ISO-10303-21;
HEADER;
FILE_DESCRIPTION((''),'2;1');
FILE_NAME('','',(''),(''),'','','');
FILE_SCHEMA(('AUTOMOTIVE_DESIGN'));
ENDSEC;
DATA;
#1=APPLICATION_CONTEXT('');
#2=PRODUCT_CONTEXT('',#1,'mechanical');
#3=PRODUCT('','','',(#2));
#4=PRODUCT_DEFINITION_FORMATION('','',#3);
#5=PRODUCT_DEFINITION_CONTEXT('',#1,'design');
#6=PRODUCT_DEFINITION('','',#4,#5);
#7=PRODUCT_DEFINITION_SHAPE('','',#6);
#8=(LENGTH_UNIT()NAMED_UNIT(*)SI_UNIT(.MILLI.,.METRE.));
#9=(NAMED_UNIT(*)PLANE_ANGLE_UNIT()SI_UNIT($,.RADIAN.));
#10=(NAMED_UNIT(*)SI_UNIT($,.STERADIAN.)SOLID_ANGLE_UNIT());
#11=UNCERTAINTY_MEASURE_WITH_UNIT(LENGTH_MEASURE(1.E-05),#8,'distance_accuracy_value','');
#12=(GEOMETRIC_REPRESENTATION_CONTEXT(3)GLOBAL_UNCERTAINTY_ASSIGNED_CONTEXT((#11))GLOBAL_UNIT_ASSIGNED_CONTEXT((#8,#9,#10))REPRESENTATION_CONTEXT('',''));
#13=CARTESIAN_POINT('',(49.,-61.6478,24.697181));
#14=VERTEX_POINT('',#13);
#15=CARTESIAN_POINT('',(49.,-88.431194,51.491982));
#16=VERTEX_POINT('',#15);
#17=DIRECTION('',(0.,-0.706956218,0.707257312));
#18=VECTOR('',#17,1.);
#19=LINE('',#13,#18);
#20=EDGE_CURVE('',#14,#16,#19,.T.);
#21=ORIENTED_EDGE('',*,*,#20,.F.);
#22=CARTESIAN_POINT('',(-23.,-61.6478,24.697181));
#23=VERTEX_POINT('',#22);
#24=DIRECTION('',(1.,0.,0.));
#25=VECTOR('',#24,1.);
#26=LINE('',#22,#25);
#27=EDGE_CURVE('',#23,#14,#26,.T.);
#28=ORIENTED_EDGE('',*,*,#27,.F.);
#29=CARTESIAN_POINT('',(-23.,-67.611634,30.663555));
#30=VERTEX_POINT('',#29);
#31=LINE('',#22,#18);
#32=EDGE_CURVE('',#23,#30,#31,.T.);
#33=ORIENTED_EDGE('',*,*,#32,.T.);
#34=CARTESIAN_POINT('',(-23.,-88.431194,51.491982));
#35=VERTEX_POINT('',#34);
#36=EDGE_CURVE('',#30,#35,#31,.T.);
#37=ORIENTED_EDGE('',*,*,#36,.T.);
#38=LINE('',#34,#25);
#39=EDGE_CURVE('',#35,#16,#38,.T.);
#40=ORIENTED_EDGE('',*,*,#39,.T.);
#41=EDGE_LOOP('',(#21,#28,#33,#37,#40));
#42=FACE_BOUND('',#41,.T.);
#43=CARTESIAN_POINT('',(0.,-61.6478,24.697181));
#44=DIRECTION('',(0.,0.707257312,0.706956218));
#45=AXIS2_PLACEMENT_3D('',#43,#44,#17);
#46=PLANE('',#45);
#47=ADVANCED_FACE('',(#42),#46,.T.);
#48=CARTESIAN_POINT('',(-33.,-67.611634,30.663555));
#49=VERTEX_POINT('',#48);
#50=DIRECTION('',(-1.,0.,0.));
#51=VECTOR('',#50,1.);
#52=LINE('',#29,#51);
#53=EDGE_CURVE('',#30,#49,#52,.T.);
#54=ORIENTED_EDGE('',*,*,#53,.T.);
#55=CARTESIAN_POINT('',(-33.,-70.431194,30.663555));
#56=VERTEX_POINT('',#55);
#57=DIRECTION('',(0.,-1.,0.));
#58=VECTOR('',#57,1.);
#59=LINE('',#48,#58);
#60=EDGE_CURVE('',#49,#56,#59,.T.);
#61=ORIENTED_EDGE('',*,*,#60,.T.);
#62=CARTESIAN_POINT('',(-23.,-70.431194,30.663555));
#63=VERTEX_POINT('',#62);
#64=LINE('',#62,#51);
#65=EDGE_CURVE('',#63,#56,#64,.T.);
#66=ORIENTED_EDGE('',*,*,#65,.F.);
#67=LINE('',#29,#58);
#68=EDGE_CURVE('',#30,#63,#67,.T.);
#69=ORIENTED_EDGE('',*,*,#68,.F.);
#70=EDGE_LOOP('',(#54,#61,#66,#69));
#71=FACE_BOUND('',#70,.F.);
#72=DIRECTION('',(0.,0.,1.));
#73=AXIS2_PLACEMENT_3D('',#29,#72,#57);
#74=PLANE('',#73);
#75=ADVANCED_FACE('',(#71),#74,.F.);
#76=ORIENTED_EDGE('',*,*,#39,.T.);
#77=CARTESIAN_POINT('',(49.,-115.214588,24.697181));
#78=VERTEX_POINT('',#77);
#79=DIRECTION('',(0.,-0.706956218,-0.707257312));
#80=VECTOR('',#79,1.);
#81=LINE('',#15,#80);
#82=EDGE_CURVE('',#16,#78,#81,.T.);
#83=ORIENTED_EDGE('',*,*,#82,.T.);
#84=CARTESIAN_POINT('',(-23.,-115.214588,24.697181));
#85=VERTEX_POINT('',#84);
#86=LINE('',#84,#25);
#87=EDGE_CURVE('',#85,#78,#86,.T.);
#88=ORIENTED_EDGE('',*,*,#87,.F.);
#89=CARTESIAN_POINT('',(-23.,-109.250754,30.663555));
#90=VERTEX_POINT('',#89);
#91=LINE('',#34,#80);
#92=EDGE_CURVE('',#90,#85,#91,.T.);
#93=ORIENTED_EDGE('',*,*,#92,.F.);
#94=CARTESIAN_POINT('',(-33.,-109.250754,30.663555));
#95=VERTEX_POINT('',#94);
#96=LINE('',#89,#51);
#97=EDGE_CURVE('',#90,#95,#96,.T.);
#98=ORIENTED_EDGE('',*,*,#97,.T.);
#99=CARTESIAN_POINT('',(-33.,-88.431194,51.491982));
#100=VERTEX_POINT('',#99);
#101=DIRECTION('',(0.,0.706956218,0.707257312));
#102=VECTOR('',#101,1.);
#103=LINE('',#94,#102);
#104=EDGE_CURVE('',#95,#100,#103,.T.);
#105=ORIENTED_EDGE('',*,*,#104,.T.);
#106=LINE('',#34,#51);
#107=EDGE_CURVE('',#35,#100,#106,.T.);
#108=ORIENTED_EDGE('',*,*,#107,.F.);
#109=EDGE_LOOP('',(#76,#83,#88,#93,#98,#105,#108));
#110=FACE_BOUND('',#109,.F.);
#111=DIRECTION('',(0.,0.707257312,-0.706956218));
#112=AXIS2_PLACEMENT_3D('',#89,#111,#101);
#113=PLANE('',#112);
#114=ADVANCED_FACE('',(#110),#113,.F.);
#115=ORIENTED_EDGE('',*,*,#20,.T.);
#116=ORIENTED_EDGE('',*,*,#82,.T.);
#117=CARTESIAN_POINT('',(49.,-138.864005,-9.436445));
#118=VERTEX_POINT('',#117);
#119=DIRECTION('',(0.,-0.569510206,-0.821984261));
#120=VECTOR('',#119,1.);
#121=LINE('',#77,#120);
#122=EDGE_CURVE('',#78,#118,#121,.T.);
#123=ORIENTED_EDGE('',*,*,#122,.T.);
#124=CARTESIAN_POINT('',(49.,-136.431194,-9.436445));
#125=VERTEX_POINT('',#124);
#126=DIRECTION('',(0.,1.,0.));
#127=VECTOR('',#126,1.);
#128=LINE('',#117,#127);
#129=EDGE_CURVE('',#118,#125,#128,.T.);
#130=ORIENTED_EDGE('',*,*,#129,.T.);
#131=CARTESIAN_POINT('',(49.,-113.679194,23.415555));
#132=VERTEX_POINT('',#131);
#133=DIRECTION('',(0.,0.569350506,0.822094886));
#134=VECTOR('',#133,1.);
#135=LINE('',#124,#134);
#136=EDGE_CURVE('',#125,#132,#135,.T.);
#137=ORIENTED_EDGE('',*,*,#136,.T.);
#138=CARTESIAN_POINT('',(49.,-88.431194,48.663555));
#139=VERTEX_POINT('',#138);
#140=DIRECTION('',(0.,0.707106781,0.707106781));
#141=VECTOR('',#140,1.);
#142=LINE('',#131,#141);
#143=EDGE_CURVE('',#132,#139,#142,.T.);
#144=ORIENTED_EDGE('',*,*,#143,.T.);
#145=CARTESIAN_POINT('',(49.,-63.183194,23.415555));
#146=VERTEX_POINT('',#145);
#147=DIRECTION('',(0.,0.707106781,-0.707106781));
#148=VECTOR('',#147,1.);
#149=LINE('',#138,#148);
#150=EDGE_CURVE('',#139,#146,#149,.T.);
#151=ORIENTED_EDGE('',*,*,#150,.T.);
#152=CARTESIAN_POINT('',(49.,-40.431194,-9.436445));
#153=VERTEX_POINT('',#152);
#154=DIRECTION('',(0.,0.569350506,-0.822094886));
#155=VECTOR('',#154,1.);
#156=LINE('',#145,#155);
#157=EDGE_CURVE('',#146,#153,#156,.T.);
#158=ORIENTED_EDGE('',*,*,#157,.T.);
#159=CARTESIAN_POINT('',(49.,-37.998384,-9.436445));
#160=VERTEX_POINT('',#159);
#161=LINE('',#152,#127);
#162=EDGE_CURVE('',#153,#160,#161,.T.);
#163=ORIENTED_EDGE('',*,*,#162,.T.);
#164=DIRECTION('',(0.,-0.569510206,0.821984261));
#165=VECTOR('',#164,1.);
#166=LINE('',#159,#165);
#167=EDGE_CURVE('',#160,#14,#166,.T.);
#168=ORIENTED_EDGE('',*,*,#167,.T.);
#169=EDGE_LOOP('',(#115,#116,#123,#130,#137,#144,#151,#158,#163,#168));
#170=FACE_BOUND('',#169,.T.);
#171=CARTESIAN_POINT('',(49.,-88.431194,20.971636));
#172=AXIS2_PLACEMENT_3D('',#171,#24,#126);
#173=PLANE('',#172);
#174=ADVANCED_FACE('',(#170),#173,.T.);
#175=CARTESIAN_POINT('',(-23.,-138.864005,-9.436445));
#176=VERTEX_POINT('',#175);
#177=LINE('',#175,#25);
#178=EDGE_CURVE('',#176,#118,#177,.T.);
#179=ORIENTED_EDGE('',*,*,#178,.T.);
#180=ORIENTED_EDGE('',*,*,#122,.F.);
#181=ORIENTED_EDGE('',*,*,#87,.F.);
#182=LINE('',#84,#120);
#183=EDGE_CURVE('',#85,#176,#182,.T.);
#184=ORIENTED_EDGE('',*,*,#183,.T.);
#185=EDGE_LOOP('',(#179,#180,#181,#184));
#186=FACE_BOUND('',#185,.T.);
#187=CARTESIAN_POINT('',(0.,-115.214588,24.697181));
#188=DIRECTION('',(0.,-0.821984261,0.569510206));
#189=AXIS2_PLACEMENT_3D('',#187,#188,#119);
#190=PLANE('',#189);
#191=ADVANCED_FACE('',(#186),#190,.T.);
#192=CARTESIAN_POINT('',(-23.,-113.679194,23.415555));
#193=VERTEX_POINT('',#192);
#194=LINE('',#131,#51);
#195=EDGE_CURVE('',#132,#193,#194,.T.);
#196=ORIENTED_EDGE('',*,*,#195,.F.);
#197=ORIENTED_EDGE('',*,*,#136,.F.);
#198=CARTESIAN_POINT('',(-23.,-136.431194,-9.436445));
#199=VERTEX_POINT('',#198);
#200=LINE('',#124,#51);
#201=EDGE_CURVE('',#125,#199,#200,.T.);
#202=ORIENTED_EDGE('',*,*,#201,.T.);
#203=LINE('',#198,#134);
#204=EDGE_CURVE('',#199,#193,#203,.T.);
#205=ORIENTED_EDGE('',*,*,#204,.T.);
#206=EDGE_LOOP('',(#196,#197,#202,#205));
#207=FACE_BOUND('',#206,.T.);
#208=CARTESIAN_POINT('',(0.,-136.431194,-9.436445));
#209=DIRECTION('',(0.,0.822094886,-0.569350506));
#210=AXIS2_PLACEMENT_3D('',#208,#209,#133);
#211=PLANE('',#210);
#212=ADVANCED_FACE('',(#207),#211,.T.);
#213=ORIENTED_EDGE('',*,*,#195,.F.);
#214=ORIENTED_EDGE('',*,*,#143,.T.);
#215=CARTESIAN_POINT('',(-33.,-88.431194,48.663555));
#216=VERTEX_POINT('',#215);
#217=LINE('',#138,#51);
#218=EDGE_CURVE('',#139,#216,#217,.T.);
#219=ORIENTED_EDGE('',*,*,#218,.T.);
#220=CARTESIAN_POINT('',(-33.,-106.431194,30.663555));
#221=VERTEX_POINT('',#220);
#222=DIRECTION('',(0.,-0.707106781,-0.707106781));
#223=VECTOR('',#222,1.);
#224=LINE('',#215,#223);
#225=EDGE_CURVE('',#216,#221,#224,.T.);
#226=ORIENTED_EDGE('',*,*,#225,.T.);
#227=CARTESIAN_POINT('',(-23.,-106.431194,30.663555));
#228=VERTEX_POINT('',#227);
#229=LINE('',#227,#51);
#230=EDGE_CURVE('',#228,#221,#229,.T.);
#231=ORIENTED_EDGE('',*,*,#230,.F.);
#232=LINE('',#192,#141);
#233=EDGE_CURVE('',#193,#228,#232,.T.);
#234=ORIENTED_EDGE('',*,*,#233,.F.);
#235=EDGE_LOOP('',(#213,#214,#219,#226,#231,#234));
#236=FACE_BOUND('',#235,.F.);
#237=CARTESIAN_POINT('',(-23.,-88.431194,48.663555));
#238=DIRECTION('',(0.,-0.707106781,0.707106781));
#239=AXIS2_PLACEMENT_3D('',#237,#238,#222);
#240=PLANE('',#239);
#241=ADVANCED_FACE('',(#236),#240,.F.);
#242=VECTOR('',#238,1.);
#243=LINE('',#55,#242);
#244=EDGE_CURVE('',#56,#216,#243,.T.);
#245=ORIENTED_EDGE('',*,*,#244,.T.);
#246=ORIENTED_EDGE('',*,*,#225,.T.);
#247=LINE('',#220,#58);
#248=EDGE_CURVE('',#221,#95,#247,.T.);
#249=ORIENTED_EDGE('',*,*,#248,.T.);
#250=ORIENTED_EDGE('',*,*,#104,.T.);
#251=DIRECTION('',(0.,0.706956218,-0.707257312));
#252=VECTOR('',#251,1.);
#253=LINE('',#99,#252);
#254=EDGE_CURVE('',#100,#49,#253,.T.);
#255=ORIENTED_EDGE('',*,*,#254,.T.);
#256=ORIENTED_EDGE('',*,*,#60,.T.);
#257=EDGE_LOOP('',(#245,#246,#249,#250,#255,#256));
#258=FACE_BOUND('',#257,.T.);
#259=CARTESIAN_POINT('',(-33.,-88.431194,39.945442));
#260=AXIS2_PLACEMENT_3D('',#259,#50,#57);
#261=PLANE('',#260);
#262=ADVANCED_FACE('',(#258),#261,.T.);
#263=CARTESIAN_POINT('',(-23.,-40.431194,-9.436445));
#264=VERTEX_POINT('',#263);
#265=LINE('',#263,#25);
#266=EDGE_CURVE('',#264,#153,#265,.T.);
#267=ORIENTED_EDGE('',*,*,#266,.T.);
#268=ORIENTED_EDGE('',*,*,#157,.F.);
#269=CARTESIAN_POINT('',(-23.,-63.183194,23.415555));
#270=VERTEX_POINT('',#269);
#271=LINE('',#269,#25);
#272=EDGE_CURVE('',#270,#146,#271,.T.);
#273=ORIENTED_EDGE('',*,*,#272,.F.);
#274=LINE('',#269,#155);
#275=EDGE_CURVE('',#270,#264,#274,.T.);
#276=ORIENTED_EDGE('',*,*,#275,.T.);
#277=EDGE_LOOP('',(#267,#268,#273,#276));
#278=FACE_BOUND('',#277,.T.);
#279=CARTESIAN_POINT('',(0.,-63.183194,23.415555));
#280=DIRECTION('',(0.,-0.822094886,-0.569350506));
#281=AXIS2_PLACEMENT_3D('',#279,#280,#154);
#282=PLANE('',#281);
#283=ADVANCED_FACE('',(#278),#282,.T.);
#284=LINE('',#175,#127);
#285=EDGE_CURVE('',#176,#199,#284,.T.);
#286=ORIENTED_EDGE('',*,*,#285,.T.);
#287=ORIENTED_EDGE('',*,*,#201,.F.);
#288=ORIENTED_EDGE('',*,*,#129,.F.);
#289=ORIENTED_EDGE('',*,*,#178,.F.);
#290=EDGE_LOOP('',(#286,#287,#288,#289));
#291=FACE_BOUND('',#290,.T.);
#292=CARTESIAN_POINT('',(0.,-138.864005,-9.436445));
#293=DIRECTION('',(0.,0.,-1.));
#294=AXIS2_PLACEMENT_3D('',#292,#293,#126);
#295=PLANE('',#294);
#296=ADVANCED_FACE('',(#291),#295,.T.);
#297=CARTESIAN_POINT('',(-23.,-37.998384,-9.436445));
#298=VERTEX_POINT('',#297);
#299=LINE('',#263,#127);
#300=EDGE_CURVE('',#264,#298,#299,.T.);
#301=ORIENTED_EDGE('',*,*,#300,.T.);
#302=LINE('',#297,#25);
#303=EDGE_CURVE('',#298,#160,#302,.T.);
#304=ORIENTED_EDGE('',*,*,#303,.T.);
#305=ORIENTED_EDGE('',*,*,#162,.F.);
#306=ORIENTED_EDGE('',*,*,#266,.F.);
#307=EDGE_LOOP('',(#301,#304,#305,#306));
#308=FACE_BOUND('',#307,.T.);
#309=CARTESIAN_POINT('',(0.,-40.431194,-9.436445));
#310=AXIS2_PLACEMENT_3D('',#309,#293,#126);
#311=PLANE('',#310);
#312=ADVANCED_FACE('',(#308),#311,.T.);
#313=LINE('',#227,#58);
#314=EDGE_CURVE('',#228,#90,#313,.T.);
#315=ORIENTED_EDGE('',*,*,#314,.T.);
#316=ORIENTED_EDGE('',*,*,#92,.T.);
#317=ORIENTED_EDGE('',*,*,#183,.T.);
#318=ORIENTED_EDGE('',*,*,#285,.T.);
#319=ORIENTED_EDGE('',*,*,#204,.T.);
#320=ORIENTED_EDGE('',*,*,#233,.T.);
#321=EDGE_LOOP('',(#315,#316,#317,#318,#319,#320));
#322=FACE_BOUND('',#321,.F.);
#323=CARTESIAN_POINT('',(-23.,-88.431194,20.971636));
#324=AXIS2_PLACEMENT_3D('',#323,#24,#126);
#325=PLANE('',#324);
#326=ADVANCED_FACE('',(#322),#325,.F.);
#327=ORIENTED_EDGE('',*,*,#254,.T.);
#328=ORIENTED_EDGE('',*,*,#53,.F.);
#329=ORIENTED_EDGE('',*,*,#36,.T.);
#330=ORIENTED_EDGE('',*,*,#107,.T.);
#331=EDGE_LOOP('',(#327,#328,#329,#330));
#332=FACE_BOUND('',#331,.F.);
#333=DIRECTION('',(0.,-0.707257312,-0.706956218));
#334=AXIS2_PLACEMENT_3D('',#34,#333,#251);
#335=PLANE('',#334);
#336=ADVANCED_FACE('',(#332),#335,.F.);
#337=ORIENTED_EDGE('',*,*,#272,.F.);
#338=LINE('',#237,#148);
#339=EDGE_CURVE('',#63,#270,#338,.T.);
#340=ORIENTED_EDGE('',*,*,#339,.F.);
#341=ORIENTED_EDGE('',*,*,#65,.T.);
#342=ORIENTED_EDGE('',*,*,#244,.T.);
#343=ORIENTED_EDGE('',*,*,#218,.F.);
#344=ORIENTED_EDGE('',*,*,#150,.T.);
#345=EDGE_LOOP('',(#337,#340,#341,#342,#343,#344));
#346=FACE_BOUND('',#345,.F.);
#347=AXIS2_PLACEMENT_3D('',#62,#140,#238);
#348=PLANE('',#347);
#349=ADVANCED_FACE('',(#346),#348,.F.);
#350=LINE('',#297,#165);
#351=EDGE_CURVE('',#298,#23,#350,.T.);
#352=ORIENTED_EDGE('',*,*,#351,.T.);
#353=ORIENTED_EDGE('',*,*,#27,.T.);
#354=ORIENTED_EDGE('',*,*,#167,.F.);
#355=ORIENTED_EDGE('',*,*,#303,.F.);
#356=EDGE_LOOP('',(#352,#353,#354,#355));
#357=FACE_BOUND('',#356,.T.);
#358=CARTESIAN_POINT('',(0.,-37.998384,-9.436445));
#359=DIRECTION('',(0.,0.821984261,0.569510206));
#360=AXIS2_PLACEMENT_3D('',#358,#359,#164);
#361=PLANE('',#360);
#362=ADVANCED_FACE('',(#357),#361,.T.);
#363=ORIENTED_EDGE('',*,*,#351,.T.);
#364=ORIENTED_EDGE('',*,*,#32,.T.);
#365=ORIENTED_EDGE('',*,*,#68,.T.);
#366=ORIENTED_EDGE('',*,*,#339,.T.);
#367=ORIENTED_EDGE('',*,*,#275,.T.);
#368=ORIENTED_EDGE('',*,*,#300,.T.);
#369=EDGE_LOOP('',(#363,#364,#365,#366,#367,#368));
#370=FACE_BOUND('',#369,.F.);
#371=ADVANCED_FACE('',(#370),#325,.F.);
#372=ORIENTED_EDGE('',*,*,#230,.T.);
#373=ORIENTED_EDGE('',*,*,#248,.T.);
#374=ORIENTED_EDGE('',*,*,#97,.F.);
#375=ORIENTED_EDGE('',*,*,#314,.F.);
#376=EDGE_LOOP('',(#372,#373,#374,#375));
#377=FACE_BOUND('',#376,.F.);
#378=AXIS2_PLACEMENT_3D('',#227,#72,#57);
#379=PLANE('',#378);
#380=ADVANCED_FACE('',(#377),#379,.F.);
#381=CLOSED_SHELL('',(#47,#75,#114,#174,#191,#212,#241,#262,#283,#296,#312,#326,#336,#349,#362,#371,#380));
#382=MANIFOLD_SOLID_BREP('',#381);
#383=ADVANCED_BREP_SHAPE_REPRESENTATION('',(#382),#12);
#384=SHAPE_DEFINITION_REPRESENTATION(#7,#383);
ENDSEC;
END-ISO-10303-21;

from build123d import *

# Parameters (mm, degrees)
F1_DEPTH = 51
F2_DEPTH = 2
F3_DEPTH = 23
F5_DEPTH = 10


with BuildPart() as f1:
    # F0 (on Right) → F1 (new body)
    with BuildSketch(Plane.YZ):
        Polygon((-106.4311944246, 30.6635548347), (-88.4311944246, 48.6635548347), (-70.4311944246, 30.6635548347), (-63.1831944246, 23.4155548347), (-40.4311944246, -9.4364451653), (-37.9983836671, -9.4364451653), (-61.6478004918, 24.697180939), (-88.4311944246, 51.4919819594), (-115.2145883574, 24.697180939), (-138.8640051821, -9.4364451653), (-136.4311944246, -9.4364451653), (-113.6791944246, 23.4155548347), align=None)
    extrude(amount=F1_DEPTH)

    # F2 (cut): a face of the model
    f2_faces = [f1.faces().sort_by_distance(p)[0] for p in [
        (51, -100.9894629386, 37.2615078041),
    ]]
    extrude(f2_faces, amount=-F2_DEPTH, mode=Mode.SUBTRACT)

    # F3 (add): a face of the model
    f3_faces = [f1.faces().sort_by_distance(p)[0] for p in [
        (0, -100.9894629386, 37.2615078041),
    ]]
    extrude(f3_faces, amount=F3_DEPTH)

    # F4 (on face) → F5 (join)
    with BuildSketch(Plane(origin=(-23, 0, 0), x_dir=(0, -1, 0), z_dir=(-1, 0, 0))):
        Polygon((88.4311944246, 51.4919819594), (67.6116343818, 30.6635548347), (70.4311944246, 30.6635548347), (88.4311944246, 48.6635548347), (106.4311944246, 30.6635548347), (109.2507544675, 30.6635548347), align=None)
    extrude(amount=F5_DEPTH)


solid = f1.part
